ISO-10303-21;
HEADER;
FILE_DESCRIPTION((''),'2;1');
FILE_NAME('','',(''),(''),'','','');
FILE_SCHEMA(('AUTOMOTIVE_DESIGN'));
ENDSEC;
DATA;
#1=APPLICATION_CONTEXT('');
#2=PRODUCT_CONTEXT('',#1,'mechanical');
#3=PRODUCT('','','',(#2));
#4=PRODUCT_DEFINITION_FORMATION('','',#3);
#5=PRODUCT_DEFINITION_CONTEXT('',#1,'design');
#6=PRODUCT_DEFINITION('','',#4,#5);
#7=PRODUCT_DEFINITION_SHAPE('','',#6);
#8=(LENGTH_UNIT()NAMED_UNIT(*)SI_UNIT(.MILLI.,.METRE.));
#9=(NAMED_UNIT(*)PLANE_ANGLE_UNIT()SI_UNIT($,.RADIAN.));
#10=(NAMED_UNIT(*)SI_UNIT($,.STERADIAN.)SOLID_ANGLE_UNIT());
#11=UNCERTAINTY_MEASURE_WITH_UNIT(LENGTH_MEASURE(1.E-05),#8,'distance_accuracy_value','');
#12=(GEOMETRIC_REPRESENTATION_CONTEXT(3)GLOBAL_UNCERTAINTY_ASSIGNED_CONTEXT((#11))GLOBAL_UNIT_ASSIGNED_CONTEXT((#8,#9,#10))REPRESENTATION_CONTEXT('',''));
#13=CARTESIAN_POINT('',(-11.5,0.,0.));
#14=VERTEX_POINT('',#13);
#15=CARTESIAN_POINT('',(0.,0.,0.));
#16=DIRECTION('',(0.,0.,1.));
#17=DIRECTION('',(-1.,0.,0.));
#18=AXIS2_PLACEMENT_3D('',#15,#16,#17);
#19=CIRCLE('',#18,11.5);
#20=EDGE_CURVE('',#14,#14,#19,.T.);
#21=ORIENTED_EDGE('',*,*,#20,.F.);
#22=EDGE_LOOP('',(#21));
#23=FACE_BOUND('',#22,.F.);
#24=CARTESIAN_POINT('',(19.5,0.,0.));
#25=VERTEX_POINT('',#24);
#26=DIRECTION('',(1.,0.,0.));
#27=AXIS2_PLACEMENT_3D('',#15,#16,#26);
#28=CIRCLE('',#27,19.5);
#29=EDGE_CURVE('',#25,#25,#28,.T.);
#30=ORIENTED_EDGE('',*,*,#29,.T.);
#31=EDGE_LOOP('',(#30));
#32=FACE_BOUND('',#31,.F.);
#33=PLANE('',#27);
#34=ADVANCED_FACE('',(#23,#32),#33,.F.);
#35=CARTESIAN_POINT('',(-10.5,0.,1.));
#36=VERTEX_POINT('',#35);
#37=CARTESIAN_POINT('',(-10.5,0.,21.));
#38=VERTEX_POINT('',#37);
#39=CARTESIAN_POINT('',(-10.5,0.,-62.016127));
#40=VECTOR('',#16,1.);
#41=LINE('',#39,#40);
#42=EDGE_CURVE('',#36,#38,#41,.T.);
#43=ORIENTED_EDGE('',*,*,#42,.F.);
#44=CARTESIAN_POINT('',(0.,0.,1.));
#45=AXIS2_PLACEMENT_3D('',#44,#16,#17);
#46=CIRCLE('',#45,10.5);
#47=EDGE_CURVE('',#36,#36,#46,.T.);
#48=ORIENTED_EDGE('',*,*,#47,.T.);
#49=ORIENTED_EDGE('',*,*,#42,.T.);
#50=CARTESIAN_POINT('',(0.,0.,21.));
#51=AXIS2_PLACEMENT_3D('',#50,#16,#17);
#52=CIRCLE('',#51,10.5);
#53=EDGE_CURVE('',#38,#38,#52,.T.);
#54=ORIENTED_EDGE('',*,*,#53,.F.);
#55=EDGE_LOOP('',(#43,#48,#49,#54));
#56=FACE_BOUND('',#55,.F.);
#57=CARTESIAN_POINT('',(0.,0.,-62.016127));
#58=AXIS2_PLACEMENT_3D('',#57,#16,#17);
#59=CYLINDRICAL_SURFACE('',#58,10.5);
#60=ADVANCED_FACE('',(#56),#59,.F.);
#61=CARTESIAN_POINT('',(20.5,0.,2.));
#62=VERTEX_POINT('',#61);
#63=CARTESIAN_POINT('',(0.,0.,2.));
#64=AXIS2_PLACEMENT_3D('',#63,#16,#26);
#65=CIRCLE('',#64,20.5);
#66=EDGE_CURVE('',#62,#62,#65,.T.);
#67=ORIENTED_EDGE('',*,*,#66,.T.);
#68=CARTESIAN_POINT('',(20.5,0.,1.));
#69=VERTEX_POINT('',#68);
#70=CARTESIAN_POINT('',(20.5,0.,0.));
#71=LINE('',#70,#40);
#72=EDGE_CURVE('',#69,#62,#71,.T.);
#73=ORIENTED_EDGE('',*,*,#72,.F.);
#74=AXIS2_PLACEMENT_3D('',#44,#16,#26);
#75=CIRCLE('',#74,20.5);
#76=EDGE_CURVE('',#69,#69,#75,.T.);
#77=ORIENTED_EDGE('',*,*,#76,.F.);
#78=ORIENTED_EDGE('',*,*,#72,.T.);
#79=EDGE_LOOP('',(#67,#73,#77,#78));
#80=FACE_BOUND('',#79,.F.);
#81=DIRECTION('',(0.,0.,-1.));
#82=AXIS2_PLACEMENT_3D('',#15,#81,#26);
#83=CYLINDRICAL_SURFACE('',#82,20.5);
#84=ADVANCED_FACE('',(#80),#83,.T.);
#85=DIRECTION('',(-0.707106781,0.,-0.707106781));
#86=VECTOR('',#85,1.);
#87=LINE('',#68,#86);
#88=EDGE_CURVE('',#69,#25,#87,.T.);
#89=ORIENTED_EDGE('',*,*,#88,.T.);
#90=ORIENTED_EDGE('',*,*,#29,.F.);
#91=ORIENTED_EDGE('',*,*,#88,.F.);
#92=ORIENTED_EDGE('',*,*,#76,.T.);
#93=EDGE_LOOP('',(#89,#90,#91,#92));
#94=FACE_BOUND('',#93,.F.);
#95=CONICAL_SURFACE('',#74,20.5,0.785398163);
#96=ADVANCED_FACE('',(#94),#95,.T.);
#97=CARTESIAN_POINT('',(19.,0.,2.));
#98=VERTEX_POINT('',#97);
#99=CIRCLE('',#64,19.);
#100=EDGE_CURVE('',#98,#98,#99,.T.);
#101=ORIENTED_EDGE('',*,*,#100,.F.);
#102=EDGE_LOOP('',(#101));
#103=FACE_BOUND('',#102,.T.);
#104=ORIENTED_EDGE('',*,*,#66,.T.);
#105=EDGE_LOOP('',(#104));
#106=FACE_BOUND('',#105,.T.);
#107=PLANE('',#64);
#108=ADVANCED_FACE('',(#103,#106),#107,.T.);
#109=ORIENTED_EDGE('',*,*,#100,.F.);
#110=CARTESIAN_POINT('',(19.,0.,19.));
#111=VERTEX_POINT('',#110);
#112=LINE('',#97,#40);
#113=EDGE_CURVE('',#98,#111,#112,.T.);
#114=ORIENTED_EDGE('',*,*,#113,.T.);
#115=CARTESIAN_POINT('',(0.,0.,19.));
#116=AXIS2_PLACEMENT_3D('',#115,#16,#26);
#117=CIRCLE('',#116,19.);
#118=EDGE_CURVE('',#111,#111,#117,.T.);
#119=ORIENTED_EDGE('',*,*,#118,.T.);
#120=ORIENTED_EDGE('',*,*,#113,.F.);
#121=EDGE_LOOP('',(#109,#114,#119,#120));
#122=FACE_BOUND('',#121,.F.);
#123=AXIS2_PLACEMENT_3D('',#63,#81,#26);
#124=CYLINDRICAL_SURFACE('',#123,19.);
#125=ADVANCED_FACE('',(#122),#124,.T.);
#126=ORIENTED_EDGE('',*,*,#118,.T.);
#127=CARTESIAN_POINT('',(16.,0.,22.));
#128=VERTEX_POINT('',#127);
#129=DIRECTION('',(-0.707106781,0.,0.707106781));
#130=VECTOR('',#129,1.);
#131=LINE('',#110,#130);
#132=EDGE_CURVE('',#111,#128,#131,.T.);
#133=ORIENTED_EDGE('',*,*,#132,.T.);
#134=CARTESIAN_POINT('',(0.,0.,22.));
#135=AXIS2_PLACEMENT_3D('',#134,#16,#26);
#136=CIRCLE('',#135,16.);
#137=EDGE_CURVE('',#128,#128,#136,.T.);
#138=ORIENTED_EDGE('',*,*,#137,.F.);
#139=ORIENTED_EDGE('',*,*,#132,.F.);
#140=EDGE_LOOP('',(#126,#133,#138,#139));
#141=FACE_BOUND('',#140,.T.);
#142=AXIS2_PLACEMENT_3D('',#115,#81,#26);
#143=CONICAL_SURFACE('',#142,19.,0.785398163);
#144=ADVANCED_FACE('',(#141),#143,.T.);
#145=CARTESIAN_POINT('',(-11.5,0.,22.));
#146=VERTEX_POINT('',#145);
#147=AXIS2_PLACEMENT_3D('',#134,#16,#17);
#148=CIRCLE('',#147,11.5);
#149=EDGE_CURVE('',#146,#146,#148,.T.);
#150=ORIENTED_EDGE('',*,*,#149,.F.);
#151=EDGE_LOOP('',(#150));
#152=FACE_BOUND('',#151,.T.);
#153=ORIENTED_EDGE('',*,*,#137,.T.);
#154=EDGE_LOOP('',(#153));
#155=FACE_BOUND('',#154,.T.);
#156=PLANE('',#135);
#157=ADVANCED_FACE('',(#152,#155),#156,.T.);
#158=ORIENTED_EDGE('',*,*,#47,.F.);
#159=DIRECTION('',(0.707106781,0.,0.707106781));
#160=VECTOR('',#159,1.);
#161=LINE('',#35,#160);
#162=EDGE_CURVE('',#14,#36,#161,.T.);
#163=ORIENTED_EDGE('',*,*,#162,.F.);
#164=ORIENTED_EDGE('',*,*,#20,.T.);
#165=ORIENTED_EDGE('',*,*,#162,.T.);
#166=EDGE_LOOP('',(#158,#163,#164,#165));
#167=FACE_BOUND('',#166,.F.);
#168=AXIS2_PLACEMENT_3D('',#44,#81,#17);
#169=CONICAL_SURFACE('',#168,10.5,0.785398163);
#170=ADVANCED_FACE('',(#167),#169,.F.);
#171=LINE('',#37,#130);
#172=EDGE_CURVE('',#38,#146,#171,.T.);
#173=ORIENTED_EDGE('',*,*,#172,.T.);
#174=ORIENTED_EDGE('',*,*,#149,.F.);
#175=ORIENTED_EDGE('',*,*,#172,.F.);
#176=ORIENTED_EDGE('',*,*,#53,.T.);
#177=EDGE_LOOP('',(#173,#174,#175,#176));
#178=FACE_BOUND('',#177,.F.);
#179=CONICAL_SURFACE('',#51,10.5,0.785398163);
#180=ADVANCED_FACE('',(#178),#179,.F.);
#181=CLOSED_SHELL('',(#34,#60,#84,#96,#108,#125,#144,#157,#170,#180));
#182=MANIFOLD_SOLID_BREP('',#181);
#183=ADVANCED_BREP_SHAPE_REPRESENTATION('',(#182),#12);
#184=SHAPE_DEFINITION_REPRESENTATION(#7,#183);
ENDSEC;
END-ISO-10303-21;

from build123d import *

# Parameters (mm, degrees)
F0_R     = 20.5
F1_DEPTH = 2
F2_R     = 19
F3_DEPTH = 20
F4_D     = 21
F5_SIZE  = 1
F6_SIZE  = 3


with BuildPart() as f1:
    # F0 (on Top) → F1 (new body)
    with BuildSketch(Plane.XY):
        Circle(F0_R)
    extrude(amount=F1_DEPTH)

    # F2 (on face) → F3 (join)
    with BuildSketch(Plane.XY.offset(2)):
        Circle(F2_R)
    extrude(amount=F3_DEPTH)

    # F4 (through all)
    with Locations(Plane(origin=(0, 0, 0), x_dir=(1, 0, 0), z_dir=(0, 0, -1))):
        with Locations((0, 0)):
            Hole(F4_D / 2)

    # F5
    f5_edges = [f1.edges().sort_by_distance(p)[0] for p in [
        (-20.5, 0, 0),
        (-10.5, 0, 0),
        (-10.5, 0, 22),
    ]]
    chamfer(f5_edges, length=F5_SIZE)

    # F6
    f6_edges = [f1.edges().sort_by_distance(p)[0] for p in [
        (-19, 0, 22),
    ]]
    chamfer(f6_edges, length=F6_SIZE)


solid = f1.part
